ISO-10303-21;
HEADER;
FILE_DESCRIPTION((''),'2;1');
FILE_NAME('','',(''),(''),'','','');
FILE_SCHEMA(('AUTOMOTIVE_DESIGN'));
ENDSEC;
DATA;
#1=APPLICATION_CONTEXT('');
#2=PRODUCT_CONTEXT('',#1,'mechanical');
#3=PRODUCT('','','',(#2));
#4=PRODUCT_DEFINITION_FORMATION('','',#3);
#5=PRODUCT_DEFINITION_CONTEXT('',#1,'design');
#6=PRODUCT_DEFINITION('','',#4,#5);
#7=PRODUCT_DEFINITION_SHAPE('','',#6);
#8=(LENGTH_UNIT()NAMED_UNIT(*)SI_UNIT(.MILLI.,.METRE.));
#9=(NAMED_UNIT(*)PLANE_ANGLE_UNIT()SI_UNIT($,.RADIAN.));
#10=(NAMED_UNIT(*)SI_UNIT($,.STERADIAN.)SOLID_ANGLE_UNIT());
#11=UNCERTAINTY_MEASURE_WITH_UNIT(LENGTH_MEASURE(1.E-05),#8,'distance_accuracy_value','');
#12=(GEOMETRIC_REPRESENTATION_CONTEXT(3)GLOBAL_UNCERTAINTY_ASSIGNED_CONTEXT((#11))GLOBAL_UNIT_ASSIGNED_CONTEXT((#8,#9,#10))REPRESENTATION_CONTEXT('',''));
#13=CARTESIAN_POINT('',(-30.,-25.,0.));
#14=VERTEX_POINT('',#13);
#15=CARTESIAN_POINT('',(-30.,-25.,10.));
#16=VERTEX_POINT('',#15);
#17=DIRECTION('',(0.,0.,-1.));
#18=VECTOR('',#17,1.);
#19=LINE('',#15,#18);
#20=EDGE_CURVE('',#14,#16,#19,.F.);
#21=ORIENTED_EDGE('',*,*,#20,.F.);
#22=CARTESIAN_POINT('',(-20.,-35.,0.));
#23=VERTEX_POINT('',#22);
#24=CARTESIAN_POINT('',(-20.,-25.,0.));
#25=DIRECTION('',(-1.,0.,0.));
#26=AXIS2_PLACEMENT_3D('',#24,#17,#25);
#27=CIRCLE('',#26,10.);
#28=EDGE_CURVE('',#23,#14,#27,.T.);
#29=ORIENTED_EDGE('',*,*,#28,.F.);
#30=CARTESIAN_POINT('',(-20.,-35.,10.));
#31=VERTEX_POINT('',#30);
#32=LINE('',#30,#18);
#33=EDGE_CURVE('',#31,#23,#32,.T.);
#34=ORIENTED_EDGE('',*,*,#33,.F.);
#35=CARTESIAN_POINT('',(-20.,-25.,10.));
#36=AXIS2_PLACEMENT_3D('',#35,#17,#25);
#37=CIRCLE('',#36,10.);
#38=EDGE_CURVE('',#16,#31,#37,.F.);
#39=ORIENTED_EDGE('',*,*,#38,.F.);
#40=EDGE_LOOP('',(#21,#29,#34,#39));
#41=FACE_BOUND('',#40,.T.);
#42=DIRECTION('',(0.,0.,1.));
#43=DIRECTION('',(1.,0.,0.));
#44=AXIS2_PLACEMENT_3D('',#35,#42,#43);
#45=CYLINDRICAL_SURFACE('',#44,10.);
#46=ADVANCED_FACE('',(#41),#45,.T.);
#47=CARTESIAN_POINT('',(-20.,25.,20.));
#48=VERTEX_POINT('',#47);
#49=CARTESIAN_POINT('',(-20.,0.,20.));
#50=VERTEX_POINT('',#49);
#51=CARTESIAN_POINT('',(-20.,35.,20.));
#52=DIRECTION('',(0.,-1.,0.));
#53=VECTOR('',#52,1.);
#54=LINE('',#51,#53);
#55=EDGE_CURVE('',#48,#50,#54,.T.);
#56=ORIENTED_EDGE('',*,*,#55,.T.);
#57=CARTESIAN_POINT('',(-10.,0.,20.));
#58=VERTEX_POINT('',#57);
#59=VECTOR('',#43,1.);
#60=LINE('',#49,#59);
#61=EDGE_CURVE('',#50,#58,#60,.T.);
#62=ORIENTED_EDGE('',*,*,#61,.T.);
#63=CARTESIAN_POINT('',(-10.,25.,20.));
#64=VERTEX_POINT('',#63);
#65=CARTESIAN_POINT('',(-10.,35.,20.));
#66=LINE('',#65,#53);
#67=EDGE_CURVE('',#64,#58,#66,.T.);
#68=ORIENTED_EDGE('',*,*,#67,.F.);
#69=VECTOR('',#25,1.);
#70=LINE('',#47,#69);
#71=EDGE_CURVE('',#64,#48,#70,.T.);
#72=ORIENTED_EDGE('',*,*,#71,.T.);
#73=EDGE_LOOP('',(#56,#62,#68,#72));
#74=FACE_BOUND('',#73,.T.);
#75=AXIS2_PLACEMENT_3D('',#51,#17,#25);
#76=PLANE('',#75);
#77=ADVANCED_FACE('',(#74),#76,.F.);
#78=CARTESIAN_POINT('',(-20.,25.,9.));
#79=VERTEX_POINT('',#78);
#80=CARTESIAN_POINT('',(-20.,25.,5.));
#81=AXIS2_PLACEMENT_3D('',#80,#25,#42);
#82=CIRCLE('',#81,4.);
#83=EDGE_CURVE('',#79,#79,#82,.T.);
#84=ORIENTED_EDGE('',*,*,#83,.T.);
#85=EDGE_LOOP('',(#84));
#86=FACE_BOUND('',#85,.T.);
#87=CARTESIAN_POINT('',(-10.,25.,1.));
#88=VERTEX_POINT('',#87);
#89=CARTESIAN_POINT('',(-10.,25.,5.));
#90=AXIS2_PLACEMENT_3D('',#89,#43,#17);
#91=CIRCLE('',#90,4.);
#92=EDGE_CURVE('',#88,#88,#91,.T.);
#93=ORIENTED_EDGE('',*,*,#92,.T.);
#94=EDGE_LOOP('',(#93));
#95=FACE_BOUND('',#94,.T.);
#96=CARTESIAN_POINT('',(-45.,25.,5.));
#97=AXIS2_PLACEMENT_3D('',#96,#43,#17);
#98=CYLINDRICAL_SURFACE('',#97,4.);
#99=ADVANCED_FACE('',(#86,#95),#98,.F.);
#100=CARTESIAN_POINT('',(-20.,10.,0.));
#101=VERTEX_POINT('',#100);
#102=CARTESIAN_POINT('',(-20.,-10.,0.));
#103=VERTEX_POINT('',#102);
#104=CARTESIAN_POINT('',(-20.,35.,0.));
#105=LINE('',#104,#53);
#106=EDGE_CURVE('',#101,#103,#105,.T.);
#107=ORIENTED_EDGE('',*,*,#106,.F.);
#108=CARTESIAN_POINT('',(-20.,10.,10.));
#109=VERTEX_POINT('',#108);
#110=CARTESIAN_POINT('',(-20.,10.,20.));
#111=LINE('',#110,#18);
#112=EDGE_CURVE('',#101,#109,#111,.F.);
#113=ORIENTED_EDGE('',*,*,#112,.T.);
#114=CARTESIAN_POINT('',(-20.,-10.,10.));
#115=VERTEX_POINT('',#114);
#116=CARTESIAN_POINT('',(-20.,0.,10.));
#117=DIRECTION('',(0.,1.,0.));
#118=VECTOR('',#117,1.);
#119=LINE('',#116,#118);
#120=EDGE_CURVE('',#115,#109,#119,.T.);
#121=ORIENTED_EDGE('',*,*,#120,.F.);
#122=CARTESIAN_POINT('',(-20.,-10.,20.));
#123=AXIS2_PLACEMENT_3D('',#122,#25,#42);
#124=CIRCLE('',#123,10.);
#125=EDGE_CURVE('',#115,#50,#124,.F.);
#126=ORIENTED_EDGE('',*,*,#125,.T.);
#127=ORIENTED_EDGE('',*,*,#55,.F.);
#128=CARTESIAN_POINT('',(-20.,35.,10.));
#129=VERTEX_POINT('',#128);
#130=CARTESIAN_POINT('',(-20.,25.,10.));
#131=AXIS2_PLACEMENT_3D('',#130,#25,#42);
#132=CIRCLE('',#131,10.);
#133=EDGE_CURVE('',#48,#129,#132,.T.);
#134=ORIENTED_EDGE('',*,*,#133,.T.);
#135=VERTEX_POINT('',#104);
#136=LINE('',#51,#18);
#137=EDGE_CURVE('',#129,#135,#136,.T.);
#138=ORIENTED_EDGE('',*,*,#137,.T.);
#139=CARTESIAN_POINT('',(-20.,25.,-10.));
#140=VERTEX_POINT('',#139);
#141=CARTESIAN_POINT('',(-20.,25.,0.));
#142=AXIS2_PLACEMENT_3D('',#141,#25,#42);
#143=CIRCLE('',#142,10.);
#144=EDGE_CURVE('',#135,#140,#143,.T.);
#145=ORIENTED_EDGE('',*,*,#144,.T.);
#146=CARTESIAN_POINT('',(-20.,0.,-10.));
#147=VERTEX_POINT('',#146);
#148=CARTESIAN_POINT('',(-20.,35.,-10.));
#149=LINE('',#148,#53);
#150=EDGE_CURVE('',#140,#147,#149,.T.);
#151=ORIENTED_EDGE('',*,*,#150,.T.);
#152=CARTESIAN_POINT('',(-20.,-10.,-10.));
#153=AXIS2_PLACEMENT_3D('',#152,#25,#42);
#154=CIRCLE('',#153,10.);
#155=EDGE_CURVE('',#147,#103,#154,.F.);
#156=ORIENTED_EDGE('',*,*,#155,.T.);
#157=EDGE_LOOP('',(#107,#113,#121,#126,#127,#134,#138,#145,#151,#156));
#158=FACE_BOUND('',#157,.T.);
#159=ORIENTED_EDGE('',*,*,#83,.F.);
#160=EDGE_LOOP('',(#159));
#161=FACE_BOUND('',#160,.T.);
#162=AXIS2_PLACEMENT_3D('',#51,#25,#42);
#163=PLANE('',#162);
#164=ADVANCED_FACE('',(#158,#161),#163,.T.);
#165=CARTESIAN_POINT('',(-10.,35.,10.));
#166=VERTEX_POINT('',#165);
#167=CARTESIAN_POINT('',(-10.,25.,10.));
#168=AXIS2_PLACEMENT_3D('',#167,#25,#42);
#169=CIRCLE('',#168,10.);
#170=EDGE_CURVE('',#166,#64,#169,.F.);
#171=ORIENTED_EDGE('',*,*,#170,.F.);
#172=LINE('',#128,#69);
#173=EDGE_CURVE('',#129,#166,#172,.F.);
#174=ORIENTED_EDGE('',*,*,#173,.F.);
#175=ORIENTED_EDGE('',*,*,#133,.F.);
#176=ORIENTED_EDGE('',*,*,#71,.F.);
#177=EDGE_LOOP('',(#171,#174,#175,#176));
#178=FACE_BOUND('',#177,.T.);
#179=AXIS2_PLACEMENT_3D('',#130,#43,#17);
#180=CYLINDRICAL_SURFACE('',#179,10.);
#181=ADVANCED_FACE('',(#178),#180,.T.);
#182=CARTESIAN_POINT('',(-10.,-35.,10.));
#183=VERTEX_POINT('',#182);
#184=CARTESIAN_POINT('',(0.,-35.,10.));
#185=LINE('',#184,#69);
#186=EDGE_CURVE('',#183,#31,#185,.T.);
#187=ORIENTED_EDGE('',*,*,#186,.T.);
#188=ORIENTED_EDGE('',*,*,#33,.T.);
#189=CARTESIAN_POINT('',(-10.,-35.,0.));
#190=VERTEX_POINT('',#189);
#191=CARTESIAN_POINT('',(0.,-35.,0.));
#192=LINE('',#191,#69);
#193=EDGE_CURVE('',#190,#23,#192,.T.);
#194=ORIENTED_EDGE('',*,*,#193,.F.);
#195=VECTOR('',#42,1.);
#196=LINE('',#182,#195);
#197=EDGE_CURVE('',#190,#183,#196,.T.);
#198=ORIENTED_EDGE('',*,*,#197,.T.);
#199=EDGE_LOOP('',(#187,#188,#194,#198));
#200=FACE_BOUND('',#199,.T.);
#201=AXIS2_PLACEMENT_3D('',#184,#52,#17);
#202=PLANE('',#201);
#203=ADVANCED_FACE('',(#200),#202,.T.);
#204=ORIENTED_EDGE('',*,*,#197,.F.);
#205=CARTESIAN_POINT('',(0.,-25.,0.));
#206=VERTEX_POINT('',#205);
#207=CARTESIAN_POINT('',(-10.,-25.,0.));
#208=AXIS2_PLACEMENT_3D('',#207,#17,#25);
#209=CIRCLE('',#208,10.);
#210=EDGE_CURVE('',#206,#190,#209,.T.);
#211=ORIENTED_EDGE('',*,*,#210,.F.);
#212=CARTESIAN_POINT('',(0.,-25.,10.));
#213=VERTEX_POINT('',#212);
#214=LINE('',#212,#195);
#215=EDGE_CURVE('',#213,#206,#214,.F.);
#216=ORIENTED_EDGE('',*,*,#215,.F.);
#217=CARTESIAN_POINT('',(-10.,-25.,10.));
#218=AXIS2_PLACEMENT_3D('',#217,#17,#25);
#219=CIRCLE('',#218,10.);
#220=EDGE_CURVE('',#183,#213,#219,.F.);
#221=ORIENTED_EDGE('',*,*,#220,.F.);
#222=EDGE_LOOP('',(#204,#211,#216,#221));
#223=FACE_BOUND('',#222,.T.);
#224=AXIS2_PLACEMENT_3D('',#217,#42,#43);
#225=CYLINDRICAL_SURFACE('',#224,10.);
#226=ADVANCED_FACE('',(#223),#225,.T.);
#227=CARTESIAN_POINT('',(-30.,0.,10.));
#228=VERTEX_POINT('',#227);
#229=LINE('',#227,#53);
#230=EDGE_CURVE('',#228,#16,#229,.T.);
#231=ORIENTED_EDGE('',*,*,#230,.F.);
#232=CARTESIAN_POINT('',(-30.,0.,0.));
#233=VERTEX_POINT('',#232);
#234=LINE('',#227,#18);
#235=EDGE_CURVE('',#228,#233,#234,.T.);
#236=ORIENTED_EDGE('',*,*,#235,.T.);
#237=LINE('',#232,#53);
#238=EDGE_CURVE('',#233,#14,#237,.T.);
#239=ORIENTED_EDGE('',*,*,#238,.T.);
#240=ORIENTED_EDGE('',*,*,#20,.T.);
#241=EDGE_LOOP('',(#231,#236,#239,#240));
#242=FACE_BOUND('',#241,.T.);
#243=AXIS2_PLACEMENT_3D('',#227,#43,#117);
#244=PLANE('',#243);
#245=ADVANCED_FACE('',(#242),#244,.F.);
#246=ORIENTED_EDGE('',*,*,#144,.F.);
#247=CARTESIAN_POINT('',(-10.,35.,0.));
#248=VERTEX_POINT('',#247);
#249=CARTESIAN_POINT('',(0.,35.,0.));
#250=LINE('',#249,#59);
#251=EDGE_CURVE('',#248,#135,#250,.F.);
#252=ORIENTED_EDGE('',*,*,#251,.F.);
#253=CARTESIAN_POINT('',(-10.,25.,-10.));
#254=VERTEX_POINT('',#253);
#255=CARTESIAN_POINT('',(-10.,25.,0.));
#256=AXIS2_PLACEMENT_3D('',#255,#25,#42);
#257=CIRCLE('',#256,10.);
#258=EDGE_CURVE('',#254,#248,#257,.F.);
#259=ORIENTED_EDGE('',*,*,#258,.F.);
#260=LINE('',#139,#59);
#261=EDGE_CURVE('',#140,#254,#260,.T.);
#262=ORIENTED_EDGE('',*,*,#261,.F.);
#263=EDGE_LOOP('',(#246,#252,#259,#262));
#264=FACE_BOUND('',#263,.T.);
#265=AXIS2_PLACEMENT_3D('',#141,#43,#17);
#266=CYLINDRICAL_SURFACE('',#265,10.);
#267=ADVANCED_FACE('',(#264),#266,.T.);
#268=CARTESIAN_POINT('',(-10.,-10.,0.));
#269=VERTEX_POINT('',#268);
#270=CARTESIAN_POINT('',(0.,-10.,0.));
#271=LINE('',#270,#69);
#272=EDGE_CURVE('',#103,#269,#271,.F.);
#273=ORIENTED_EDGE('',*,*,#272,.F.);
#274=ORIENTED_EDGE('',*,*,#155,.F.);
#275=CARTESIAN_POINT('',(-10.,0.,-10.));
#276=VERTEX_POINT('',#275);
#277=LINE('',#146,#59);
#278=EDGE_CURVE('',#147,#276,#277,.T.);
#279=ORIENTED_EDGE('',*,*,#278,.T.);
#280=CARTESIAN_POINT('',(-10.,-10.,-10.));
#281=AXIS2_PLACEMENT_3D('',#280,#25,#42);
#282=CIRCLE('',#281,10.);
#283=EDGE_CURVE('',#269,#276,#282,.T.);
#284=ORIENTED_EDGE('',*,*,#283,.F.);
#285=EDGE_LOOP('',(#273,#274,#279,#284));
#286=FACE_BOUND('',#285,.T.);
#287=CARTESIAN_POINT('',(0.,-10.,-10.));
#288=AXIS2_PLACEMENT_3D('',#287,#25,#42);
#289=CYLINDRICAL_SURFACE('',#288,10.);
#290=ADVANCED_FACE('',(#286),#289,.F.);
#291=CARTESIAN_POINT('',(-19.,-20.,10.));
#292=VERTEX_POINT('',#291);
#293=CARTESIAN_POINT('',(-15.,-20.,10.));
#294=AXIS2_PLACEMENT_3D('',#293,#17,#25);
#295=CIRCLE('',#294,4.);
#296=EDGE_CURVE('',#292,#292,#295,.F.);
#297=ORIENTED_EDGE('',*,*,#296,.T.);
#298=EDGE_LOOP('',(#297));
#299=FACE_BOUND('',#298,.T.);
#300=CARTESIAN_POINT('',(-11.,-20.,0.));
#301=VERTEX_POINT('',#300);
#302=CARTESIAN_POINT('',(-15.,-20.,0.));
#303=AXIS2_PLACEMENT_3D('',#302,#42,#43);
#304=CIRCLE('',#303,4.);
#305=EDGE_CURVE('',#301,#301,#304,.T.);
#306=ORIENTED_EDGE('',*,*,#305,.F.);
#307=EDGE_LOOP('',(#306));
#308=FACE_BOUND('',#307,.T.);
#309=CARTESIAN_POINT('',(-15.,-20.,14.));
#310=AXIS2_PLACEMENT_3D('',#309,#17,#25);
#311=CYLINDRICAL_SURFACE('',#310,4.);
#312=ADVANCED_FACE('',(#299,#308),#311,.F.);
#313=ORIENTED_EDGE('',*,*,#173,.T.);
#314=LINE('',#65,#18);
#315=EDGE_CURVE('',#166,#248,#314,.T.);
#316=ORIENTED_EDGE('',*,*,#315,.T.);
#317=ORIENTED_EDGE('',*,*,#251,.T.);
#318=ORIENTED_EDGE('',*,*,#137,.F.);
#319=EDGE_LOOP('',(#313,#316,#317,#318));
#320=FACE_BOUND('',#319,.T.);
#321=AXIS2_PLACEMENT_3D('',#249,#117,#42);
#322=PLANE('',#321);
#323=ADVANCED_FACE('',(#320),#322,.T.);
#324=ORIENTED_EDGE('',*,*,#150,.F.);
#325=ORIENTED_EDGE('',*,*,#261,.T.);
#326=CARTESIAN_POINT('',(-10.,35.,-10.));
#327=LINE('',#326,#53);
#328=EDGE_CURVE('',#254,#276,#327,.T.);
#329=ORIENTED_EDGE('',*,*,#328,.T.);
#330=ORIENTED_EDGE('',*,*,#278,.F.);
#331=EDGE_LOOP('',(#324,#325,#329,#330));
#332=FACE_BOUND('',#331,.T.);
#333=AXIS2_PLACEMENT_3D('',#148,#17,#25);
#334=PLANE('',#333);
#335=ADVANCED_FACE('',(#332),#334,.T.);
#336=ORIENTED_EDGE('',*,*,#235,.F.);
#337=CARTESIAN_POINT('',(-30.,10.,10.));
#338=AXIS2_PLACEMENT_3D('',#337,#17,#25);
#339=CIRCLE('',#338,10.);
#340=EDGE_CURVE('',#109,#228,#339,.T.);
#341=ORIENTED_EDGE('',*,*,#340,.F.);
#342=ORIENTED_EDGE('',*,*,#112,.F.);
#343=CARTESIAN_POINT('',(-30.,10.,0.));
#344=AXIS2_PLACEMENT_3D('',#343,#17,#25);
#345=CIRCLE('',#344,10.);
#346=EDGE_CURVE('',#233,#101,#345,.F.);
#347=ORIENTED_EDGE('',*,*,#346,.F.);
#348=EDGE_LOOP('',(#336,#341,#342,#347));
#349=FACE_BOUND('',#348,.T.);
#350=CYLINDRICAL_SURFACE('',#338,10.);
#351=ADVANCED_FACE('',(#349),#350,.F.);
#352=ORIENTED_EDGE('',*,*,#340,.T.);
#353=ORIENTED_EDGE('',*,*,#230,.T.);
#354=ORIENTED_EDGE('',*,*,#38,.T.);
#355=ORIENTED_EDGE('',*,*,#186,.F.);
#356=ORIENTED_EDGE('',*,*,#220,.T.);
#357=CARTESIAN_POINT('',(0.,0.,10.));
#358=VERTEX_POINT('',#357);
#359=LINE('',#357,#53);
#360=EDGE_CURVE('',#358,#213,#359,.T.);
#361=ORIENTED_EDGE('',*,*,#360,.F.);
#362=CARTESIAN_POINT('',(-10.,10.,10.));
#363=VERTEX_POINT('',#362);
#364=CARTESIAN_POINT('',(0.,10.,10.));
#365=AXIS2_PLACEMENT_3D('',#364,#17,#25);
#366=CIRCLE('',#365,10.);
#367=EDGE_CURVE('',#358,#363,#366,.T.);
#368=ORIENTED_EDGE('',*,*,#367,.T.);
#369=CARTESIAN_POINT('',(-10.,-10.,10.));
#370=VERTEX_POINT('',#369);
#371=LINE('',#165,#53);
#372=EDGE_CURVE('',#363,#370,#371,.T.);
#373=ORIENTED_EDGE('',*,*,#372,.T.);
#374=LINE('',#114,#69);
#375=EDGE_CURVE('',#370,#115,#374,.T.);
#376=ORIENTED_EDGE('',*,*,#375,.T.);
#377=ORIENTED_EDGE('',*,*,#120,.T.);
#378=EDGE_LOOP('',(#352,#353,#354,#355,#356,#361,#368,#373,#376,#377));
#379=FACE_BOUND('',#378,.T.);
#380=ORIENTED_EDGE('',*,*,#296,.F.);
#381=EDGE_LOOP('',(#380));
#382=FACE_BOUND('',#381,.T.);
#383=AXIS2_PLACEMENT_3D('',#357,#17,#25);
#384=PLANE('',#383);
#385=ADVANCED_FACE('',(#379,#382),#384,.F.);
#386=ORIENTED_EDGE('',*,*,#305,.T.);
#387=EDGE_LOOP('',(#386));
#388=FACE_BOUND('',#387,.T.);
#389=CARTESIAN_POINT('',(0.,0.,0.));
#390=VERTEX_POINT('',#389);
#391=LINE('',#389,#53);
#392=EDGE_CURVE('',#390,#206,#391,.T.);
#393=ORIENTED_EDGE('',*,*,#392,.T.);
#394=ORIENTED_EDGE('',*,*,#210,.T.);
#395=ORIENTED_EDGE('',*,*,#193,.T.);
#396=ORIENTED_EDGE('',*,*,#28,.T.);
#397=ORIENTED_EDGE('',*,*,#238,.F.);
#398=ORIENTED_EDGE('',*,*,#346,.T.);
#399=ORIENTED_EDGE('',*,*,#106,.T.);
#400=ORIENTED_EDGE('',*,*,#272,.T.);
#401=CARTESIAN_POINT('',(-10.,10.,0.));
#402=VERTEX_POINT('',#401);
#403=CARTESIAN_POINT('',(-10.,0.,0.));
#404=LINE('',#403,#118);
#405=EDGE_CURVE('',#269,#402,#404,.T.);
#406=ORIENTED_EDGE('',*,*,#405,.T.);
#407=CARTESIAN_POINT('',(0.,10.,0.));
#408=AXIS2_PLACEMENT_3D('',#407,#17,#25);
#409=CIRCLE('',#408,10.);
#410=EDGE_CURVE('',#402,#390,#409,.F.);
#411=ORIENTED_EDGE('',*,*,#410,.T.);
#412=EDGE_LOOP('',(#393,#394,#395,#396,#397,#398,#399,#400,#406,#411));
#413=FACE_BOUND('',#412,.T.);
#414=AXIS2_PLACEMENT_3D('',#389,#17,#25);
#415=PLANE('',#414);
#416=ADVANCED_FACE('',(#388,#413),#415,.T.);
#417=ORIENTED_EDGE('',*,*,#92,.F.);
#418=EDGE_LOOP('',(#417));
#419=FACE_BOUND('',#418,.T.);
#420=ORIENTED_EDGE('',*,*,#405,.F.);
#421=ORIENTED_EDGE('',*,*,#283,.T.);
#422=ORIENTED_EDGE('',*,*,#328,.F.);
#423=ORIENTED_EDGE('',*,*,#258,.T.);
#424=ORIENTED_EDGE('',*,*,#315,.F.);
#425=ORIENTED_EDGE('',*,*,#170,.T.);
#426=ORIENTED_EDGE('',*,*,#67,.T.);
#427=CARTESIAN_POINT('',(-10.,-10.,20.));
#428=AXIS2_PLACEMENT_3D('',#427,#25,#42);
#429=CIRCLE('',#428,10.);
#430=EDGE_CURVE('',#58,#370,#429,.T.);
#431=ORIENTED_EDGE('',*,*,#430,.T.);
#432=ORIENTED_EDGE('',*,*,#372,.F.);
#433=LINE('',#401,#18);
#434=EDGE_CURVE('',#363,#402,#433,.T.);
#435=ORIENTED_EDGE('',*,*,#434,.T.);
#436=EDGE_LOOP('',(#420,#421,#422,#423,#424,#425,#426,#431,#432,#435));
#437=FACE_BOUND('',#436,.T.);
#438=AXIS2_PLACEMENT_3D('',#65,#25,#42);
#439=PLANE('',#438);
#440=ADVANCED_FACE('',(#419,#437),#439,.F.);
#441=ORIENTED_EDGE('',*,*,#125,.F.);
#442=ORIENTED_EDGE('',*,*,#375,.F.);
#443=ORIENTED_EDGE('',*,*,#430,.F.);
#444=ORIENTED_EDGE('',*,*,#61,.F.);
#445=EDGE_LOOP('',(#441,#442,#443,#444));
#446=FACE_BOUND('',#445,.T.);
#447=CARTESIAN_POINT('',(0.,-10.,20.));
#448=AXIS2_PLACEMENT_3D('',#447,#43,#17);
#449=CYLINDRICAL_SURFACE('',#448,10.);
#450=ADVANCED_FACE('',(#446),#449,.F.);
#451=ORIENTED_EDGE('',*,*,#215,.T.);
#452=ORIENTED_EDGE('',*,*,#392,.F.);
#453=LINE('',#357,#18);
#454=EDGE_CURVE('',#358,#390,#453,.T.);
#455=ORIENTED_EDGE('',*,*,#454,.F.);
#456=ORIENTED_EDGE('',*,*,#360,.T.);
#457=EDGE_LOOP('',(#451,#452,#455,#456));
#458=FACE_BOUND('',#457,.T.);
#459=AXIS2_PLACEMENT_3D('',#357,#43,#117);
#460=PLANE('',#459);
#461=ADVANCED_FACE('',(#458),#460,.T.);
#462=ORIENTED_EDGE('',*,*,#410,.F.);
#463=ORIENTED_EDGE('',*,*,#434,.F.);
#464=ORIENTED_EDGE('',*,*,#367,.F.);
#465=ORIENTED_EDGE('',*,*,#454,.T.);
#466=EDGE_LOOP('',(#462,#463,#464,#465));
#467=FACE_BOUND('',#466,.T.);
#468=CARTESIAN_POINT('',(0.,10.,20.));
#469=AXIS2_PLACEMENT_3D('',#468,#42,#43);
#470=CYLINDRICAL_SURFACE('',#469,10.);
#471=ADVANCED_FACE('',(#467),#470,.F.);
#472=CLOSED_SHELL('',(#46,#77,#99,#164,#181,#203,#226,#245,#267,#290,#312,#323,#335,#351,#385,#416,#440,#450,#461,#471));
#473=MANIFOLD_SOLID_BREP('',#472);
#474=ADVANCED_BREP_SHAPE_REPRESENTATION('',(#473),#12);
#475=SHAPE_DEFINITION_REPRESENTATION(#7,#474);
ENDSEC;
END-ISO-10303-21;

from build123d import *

# Parameters (mm, degrees)
SKETCH1_W           = 30
SKETCH1_H           = 35
BOSS_EXTRUDE1_DEPTH = 10
FILLET1_R           = 10
FILLET2_R           = 10
SKETCH11_R          = 4
CUT_EXTRUDE3_DEPTH  = 14
SKETCH12_W          = 10
SKETCH12_H          = 30
BOSS_EXTRUDE4_DEPTH = 35
SKETCH15_R          = 4
CUT_EXTRUDE4_DEPTH  = 35
FILLET10_R          = 10
FILLET11_R          = 10
FILLET13_R          = 10
FILLET14_R          = 10
FILLET15_R          = 10
FILLET16_R          = 10


with BuildPart() as part:
    # Sketch1 → Boss-Extrude1 (new body)
    with BuildSketch(Plane.XY):
        with Locations((-15, -17.5)):
            Rectangle(SKETCH1_W, SKETCH1_H)
    extrude(amount=BOSS_EXTRUDE1_DEPTH)

    # Fillet1
    fillet1_edges = [part.edges().sort_by_distance(p)[0] for p in [
        (-30, -35, 5),
    ]]
    fillet(fillet1_edges, radius=FILLET1_R)

    # Fillet2
    fillet2_edges = [part.edges().sort_by_distance(p)[0] for p in [
        (0, -35, 5),
    ]]
    fillet(fillet2_edges, radius=FILLET2_R)

    # Sketch11 → Cut-Extrude3 (cut)
    with BuildSketch(Plane.XY):
        with Locations(Location((-15, -20, 0), (0, 0, 180))):
            Circle(SKETCH11_R)
    extrude(amount=CUT_EXTRUDE3_DEPTH, mode=Mode.SUBTRACT)

    # Sketch12 → Boss-Extrude4 (add)
    with BuildSketch(Plane(origin=(0, 0, 0), x_dir=(1, 0, 0), z_dir=(0, 1, 0))):
        with Locations((-15, -5)):
            Rectangle(SKETCH12_W, SKETCH12_H)
    extrude(amount=BOSS_EXTRUDE4_DEPTH)

    # Sketch15 → Cut-Extrude4 (cut)
    with BuildSketch(Plane(origin=(-10, 0, 0), x_dir=(0, 0, -1), z_dir=(1, 0, 0))):
        with Locations((-5, 25)):
            Circle(SKETCH15_R)
    extrude(amount=-CUT_EXTRUDE4_DEPTH, mode=Mode.SUBTRACT)

    # Fillet10
    fillet10_edges = [part.edges().sort_by_distance(p)[0] for p in [
        (-15, 35, -10),
    ]]
    fillet(fillet10_edges, radius=FILLET10_R)

    # Fillet11
    fillet11_edges = [part.edges().sort_by_distance(p)[0] for p in [
        (-15, 35, 20),
    ]]
    fillet(fillet11_edges, radius=FILLET11_R)

    # Fillet13
    fillet13_edges = [part.edges().sort_by_distance(p)[0] for p in [
        (-15, 0, 10),
    ]]
    fillet(fillet13_edges, radius=FILLET13_R - 0.0001)  # a hair under: the kernel refuses the full size

    # Fillet14
    fillet14_edges = [part.edges().sort_by_distance(p)[0] for p in [
        (-15, 0, 0),
    ]]
    fillet(fillet14_edges, radius=FILLET14_R - 0.0001)  # a hair under: the kernel refuses the full size

    # Fillet15
    fillet15_edges = [part.edges().sort_by_distance(p)[0] for p in [
        (-10, 0, 5),
    ]]
    fillet(fillet15_edges, radius=FILLET15_R - 0.0001)  # a hair under: the kernel refuses the full size

    # Fillet16
    fillet16_edges = [part.edges().sort_by_distance(p)[0] for p in [
        (-20, 0, 5),
    ]]
    fillet(fillet16_edges, radius=FILLET16_R - 0.0001)  # a hair under: the kernel refuses the full size


solid = part.part
